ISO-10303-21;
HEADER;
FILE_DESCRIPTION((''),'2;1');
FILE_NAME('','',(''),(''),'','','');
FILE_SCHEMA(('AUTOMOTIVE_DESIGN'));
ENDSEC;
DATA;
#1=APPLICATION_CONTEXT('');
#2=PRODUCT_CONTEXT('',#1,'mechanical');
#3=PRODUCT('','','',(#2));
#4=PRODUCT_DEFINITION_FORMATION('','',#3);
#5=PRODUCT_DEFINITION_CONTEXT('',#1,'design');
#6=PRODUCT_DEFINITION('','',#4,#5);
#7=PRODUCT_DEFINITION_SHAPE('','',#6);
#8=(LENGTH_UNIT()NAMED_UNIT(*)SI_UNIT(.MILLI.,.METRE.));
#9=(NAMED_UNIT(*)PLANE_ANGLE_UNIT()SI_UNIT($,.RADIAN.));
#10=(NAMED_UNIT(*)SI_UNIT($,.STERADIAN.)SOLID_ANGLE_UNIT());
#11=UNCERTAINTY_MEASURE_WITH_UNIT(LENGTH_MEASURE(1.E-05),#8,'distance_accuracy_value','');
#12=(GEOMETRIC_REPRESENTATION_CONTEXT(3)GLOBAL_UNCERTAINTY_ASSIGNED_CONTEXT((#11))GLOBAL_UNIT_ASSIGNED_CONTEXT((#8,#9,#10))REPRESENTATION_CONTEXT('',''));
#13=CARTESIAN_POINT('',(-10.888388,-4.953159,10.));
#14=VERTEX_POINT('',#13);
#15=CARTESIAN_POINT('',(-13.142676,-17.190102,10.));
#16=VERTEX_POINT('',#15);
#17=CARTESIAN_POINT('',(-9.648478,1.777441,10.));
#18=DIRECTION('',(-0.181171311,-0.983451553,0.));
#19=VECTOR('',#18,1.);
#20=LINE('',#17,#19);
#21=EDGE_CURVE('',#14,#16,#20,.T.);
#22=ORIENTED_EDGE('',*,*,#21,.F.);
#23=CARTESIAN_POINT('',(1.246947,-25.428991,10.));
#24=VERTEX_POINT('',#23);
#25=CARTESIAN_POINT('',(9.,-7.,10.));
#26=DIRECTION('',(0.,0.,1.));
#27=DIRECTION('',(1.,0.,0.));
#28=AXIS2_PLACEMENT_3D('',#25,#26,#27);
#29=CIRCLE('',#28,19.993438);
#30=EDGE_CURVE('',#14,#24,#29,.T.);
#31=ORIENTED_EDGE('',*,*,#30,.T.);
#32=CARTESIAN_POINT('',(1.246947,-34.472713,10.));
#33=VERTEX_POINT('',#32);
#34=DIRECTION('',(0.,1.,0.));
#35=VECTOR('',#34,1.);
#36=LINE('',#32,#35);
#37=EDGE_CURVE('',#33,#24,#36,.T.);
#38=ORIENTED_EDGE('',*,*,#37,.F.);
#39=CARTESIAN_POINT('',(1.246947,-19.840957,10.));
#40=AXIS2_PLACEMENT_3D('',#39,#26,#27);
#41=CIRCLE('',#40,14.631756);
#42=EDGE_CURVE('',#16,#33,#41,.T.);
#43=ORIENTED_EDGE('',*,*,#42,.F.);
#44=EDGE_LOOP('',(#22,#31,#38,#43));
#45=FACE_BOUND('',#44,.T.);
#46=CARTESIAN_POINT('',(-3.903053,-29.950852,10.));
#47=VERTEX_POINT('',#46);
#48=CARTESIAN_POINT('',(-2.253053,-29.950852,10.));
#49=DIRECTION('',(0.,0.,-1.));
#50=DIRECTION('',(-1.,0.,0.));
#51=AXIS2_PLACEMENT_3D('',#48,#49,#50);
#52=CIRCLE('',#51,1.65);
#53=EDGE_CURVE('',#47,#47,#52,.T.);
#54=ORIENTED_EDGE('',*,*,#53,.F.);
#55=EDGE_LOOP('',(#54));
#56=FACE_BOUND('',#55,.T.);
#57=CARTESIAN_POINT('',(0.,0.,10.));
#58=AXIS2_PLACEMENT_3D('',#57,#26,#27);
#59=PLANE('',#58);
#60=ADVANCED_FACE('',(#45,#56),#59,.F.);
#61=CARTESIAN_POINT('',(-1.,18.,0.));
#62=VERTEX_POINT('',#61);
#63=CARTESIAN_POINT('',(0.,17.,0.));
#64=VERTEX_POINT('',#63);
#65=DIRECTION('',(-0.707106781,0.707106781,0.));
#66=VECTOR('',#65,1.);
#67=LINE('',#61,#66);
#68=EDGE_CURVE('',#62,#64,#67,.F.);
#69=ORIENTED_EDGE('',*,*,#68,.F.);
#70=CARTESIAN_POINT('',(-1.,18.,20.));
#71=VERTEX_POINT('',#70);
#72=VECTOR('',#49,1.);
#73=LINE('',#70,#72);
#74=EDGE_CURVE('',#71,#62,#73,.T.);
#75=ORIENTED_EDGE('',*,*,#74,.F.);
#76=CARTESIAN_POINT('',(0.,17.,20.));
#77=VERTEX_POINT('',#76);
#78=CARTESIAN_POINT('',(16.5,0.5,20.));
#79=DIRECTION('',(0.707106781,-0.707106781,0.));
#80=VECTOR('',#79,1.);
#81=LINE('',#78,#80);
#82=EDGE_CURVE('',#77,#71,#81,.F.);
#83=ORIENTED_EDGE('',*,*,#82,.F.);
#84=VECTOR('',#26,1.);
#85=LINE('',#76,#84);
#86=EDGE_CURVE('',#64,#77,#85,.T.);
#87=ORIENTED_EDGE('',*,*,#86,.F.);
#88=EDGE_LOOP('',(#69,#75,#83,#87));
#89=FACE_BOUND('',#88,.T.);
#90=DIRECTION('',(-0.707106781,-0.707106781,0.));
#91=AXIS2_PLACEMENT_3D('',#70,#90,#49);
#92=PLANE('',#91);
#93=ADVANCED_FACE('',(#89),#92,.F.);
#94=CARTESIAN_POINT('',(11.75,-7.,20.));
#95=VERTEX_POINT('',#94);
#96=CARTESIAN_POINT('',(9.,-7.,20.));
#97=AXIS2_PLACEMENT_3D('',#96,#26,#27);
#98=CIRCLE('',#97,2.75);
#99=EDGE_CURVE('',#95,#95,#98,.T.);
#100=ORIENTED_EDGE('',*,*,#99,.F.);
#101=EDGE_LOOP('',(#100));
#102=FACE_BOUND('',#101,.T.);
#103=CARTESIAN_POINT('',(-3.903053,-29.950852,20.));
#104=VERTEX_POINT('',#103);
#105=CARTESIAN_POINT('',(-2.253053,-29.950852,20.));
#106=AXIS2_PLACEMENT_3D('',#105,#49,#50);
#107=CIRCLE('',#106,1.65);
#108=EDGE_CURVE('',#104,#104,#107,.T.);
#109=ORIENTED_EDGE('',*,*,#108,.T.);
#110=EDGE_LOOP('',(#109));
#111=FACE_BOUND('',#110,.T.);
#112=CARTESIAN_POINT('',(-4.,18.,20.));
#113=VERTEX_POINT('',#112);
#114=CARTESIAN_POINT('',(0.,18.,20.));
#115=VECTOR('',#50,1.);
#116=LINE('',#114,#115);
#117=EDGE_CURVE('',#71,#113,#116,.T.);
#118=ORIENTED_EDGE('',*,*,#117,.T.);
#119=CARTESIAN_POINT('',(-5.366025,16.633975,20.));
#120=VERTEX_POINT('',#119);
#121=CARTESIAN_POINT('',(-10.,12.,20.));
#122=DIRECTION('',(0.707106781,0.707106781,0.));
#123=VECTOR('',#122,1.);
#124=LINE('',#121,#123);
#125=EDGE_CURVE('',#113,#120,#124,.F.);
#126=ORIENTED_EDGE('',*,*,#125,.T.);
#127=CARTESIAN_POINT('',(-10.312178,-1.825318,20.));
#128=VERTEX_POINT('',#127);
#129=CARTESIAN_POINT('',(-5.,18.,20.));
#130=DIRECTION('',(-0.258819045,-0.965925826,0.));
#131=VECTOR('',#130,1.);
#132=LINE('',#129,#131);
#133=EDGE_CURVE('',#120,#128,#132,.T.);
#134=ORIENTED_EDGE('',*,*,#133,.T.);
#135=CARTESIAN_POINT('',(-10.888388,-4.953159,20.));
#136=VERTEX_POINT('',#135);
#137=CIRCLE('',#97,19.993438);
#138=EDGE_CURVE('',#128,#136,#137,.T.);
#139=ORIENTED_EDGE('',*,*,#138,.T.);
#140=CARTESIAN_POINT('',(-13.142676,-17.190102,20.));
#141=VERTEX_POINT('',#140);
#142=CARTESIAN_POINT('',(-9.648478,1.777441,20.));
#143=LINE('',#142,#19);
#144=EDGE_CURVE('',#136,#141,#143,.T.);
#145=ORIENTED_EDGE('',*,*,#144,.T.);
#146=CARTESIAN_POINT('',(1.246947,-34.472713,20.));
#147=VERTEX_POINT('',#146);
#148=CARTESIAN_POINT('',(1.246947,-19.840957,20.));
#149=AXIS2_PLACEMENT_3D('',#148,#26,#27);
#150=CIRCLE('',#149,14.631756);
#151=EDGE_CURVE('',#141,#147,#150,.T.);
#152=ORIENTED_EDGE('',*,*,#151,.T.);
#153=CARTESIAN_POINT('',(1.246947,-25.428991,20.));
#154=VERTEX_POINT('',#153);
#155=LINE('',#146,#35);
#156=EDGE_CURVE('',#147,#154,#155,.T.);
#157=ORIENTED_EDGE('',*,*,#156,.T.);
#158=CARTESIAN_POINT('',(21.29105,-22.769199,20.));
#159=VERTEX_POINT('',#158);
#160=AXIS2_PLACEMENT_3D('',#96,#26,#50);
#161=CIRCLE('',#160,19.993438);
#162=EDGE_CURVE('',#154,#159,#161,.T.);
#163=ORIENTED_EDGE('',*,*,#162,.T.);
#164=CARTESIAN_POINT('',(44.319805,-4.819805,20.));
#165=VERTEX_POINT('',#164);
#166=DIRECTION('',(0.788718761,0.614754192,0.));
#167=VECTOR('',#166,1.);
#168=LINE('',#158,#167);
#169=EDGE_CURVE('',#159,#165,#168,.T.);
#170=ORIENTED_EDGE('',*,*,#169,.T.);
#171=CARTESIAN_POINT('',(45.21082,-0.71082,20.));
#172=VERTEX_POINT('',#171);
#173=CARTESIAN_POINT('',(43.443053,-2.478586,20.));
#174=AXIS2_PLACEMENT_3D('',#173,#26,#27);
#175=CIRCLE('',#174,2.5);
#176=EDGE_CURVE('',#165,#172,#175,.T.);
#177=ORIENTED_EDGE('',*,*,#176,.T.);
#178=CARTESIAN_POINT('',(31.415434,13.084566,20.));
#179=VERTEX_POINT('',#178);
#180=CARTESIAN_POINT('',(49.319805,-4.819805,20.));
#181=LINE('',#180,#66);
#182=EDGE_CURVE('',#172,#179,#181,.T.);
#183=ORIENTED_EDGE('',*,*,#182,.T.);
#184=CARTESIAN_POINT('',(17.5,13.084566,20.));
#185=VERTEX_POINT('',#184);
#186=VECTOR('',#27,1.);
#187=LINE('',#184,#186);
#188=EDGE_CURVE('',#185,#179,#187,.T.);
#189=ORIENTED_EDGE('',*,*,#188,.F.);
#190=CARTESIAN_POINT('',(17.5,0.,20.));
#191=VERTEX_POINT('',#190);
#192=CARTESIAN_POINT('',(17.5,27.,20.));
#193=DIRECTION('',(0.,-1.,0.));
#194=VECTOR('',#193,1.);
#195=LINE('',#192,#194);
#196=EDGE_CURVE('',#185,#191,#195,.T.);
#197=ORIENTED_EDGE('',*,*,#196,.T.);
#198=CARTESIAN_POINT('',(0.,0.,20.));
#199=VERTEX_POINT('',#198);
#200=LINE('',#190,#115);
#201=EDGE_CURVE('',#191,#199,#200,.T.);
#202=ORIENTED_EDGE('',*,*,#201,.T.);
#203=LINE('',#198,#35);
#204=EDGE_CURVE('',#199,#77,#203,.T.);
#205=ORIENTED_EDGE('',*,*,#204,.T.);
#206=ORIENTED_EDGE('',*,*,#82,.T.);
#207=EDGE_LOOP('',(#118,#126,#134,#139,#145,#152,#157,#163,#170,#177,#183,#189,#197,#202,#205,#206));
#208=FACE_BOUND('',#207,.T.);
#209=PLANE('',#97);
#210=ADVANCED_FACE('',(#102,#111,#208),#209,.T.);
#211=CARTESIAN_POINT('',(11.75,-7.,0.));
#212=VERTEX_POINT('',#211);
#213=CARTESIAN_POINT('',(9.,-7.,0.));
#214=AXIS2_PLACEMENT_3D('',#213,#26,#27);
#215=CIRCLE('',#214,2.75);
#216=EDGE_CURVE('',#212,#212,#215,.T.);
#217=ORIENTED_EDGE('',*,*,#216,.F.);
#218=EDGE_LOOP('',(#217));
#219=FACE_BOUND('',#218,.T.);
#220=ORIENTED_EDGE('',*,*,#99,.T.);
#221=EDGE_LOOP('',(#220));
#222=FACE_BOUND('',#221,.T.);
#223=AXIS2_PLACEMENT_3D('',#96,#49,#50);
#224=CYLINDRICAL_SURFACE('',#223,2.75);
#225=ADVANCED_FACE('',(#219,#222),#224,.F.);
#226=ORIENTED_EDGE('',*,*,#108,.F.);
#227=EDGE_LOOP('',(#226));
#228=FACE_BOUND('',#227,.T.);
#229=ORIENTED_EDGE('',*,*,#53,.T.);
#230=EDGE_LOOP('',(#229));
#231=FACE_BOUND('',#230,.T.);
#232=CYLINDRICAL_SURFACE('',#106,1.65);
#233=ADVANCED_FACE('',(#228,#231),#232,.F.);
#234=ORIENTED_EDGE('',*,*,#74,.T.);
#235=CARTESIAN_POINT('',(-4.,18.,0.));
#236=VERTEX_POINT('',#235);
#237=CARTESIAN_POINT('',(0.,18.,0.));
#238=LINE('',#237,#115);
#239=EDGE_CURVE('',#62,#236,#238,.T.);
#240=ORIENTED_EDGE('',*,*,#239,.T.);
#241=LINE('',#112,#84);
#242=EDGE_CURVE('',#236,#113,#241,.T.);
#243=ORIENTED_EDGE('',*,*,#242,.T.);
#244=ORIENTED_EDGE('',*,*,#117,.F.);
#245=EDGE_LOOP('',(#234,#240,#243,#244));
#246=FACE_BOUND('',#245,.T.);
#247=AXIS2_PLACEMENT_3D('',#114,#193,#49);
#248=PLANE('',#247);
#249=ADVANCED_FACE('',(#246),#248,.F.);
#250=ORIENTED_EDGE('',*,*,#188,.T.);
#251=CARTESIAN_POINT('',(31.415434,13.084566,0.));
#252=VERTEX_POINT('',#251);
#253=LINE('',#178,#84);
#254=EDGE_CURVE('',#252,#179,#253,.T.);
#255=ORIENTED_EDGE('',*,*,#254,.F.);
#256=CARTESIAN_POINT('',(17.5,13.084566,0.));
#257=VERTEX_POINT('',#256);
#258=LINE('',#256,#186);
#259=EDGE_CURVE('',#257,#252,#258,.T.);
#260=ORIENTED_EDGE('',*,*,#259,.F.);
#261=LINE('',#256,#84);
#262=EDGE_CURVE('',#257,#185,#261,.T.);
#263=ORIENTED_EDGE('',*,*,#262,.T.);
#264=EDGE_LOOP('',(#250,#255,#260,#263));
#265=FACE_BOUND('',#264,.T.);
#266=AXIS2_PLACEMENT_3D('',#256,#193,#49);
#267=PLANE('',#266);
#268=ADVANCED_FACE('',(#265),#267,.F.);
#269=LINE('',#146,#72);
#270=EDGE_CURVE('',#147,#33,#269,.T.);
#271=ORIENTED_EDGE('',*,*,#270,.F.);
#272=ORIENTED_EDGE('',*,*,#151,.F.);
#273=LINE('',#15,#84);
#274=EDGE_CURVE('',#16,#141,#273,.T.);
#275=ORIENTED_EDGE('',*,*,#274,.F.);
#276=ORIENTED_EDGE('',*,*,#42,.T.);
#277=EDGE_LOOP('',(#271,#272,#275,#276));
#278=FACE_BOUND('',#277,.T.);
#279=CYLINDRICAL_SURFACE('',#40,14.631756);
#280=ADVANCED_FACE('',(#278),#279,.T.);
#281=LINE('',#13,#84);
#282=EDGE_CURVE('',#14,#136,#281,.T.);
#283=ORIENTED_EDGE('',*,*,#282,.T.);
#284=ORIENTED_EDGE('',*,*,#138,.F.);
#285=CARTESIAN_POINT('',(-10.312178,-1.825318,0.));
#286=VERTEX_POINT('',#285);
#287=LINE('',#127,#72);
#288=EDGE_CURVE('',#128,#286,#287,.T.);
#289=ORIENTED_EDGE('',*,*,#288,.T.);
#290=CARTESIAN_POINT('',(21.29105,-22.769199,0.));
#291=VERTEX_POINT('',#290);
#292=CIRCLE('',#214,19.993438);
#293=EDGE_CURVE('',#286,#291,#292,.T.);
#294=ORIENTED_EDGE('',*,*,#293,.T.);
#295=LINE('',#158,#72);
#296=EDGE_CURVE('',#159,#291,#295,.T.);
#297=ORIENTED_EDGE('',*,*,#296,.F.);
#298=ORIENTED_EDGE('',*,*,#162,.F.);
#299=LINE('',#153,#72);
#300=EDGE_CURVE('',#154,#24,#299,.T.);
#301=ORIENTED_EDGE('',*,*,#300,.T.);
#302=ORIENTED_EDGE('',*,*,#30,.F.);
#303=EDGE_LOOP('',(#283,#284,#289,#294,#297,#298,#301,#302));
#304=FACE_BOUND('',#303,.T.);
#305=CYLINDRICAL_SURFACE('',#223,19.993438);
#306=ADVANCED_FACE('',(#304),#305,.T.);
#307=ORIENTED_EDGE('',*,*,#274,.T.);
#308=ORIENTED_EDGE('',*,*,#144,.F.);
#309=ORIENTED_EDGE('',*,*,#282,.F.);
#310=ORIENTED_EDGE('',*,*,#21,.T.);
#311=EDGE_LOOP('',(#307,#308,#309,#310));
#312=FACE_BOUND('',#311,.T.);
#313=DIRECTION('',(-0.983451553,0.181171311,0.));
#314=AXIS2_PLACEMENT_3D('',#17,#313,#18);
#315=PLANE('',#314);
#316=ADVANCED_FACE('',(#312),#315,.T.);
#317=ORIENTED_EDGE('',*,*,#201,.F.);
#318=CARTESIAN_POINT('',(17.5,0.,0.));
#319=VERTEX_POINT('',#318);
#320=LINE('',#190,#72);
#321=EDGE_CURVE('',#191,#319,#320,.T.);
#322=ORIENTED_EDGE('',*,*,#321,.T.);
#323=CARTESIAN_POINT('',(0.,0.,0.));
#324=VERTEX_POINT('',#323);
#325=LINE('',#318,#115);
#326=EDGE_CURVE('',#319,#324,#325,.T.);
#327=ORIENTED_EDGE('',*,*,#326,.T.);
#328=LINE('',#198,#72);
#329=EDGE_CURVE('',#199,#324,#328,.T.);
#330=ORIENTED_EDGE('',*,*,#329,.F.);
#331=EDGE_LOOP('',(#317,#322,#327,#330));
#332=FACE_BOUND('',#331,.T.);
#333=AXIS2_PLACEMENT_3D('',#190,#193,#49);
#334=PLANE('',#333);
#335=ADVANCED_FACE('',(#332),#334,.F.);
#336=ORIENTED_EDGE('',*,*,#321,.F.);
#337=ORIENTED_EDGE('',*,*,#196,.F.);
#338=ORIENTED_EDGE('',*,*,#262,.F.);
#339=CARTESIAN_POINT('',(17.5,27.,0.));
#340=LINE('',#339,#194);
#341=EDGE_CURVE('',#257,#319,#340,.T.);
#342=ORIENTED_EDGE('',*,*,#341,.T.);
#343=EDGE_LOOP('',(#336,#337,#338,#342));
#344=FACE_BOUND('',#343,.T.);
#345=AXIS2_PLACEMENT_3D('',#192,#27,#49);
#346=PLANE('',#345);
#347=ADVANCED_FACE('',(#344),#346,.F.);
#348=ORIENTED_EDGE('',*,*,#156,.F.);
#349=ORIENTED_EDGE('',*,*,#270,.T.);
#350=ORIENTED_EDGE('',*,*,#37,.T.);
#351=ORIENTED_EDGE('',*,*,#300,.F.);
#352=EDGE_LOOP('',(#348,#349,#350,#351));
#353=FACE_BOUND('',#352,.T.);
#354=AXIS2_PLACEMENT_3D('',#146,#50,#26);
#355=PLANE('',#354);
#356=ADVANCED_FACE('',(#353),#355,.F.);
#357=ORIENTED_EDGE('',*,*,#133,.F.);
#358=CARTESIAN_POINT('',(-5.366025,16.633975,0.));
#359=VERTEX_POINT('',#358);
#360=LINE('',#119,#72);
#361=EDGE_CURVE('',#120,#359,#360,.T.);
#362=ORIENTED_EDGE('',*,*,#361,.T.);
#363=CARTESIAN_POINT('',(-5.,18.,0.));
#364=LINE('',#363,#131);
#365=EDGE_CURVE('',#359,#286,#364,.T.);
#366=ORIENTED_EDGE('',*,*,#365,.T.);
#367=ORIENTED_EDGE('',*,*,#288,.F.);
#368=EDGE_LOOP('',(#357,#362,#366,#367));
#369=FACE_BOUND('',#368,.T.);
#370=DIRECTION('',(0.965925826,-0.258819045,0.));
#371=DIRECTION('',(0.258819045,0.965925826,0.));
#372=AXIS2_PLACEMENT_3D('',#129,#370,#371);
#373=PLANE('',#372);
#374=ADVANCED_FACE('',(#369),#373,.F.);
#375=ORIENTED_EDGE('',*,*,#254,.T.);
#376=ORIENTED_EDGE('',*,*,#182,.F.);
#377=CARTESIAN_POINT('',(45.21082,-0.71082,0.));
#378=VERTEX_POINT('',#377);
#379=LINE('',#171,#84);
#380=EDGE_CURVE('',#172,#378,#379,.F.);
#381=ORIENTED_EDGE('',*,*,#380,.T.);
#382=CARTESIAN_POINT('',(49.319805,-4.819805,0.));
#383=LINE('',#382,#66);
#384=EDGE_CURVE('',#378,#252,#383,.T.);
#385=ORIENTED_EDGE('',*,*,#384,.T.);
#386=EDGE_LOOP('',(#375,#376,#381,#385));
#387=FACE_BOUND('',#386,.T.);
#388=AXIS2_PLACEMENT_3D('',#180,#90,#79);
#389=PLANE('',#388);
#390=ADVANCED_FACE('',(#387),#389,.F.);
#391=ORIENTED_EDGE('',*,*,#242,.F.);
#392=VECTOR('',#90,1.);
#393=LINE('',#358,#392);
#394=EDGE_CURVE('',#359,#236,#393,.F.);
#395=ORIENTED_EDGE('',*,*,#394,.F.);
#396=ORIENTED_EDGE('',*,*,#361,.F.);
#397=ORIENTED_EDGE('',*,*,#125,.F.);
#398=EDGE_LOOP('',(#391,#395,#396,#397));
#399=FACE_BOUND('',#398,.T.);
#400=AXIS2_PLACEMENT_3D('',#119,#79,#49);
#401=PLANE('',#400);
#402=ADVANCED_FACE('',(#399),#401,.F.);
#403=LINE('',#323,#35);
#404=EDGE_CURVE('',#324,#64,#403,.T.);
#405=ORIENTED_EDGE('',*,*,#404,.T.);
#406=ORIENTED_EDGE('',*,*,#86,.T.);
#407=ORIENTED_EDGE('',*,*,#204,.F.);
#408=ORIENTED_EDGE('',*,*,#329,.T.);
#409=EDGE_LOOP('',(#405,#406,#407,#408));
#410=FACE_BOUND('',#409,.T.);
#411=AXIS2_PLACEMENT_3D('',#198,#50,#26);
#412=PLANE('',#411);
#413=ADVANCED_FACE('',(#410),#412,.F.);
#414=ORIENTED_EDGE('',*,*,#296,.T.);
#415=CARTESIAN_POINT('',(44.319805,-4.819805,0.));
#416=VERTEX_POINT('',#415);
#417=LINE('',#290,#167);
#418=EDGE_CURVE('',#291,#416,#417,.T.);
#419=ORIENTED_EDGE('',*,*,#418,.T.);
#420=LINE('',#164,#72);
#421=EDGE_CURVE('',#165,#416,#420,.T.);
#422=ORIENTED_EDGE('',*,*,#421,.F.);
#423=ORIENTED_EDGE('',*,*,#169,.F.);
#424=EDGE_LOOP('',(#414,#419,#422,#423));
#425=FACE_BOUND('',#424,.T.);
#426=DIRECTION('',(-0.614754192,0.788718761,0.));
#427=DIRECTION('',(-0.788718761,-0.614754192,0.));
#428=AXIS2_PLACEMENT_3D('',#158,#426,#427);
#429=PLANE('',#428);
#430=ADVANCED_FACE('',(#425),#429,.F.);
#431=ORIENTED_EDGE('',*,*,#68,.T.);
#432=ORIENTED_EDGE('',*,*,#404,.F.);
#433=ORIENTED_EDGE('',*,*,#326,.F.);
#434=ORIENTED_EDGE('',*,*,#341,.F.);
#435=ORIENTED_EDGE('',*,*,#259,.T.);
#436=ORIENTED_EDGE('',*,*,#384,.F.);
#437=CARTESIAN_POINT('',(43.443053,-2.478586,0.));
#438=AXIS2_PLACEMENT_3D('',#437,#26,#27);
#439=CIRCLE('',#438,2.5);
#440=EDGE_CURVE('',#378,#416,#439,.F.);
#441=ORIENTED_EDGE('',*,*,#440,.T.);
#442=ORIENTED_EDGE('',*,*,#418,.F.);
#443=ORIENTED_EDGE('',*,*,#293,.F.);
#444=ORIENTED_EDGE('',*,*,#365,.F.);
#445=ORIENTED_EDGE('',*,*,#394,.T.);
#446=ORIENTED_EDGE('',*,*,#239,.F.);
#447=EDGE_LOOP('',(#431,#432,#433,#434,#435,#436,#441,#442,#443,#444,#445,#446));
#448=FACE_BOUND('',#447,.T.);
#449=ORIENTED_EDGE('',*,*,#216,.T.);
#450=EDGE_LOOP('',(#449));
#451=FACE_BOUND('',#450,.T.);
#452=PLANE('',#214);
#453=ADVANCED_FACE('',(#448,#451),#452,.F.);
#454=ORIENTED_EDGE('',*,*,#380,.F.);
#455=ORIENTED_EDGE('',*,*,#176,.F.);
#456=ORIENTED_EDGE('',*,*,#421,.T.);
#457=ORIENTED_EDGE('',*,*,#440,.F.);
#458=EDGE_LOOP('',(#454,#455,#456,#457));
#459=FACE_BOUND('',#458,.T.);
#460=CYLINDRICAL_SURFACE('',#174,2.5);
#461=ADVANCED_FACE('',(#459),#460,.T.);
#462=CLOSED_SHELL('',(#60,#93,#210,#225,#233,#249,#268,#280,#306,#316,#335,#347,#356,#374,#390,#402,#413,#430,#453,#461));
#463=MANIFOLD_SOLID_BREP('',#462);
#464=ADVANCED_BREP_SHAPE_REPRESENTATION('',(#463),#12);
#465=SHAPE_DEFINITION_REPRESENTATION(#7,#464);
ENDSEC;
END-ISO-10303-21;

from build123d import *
from OCP.BRepFilletAPI import BRepFilletAPI_MakeChamfer

# Parameters (mm, degrees)
SKETCH_1_R          = 2.75
EXTRUDE_1_DEPTH     = 20
CHAMFER_1_SIZE      = 1
CHAMFER_1_SIZE2     = 1.414213562
FILLET_1_R          = 2.5
SKETCH_2_W          = 28.23976686
SKETCH_2_H          = 12.215936495
CUT_EXTRUDE_1_DEPTH = 57.915812899
EXTRUDE_START       = -10
EXTRUDE_2_DEPTH     = 10
SKETCH_4_R          = 1.65
CUT_EXTRUDE_2_DEPTH = 10


with BuildPart() as part:
    # 草图1 → 凸台-拉伸1 (new body)
    with BuildSketch(Plane.XY):
        with BuildLine():
            Line((0, 0), (0, 18))
            Line((0, 18), (-5, 18))
            Line((-5, 18), (-10.312177826, -1.825317547))
            ThreePointArc((-10.312177826, -1.825317547), (-2.044709461, -23.66589163), (21.291049633, -22.769199403))
            Line((21.291049633, -22.769199403), (44.319805153, -4.819805153))
            Line((44.319805153, -4.819805153), (49.319805153, -4.819805153))
            Line((49.319805153, -4.819805153), (17.5, 27))
            Line((17.5, 27), (17.5, 0))
            Line((17.5, 0), (0, 0))
        make_face()
        with Locations((9, -7)):
            Circle(SKETCH_1_R, mode=Mode.SUBTRACT)
    extrude(amount=EXTRUDE_1_DEPTH)

    # 倒角1: one chamfer whose edges measure the first distance from different faces: ONE call of the kernel's chamfer builder (chamfer() names one face for all edges)
    chamfer_1_edges_1 = [part.edges().sort_by_distance(p)[0] for p in [
        (-5, 18, 10),
    ]]
    chamfer_1_side_1 = [part.faces().sort_by_distance(p)[0] for p in [
        (-2.5, 18, 10),
    ]]
    chamfer_1_edges_2 = [part.edges().sort_by_distance(p)[0] for p in [
        (0, 18, 10),
    ]]
    chamfer_1 = BRepFilletAPI_MakeChamfer(part.part.solid().wrapped)
    for e in chamfer_1_edges_1:
        chamfer_1.Add(CHAMFER_1_SIZE, CHAMFER_1_SIZE2, e.wrapped, chamfer_1_side_1[0].wrapped)  # the first distance lies on this face
    for e in chamfer_1_edges_2:
        chamfer_1.Add(CHAMFER_1_SIZE, e.wrapped)
    add(Compound.cast(chamfer_1.Shape()), mode=Mode.REPLACE)

    # 圆角1
    # the kernel refuses this fillet: 2.5 mm, written as the material it takes off along each edge
    with BuildSketch(Plane(origin=(17.5, 27, -15.088834765), x_dir=(0, -1, 0), z_dir=(0, 0, 1))) as fillet_1_piece_1:
        with BuildLine():
            CenterArc((FILLET_1_R * 2.41421356237, FILLET_1_R), FILLET_1_R, 135, 135)
            Line((FILLET_1_R * 1.70710678119, FILLET_1_R * 1.70710678119), (FILLET_1_R * 1.69296464556, FILLET_1_R * 1.72124891681))
            Line((FILLET_1_R * 1.69296464556, FILLET_1_R * 1.72124891681), (-FILLET_1_R * 0.0141421356237, FILLET_1_R * 0.0141421356237))
            Line((-FILLET_1_R * 0.0141421356237, FILLET_1_R * 0.0141421356237), (0, -FILLET_1_R * 0.02))
            Line((0, -FILLET_1_R * 0.02), (FILLET_1_R * 2.41421356237, -FILLET_1_R * 0.02))
            Line((FILLET_1_R * 2.41421356237, -FILLET_1_R * 0.02), (FILLET_1_R * 2.41421356237, 0))
        make_face()
    extrude(amount=50.17766953, mode=Mode.SUBTRACT)
    with BuildSketch(Plane(origin=(49.319805153, -4.819805153, -14.527458022), x_dir=(-0.7071067811865513, 0.7071067811865437, 0), z_dir=(0, 0, 1))) as fillet_1_piece_2:
        with BuildLine():
            CenterArc((5.810983209, 2.5), FILLET_1_R, 155.530199479, 114.469800521)
            Line((3.535533906, 3.535533906), (3.49002492, 3.556244584))
            ThreePointArc((3.49002492, 3.556244584), (1.732411614, 1.803122292), (-0.035355339, 0.035355339))
            Line((-0.035355339, 0.035355339), (0, -0.05))
            Line((0, -0.05), (5.810983209, -0.05))
            Line((5.810983209, -0.05), (5.810983209, 0))
        make_face()
    extrude(amount=49.054916044, mode=Mode.SUBTRACT)

    # 草图2 → 切除-拉伸1 (cut, through all)
    with BuildSketch(Plane.XY.offset(20)):
        with Locations((31.61988343, 19.192534099)):
            Rectangle(SKETCH_2_W, SKETCH_2_H)
    extrude(amount=-CUT_EXTRUDE_1_DEPTH, mode=Mode.SUBTRACT)

    # 草图3 → 凸台-拉伸2 (add)
    with BuildSketch(Plane.XY.offset(20).offset(EXTRUDE_START)):
        with BuildLine():
            ThreePointArc((21.291049633, -22.769199403), (-0.684147296, -24.491564883), (-10.888388441, -4.953159484))
            Line((-10.888388441, -4.953159484), (-13.142676364, -17.190102226))
            ThreePointArc((-13.142676364, -17.190102226), (-6.344046, -32.349558271), (10.241880352, -31.381297238))
            Line((10.241880352, -31.381297238), (21.291049633, -22.769199403))
        make_face()
    extrude(amount=EXTRUDE_2_DEPTH)

    # 草图4 → 切除-拉伸2 (cut)
    with BuildSketch(Plane(origin=(0, 0, 10), x_dir=(-1, 0, 0), z_dir=(0, 0, -1))):
        with Locations((2.25305307, -29.950852035)):
            Circle(SKETCH_4_R)
        with BuildLine():
            Line((-1.24694693, -34.472712807), (-1.24694693, -25.428991263))
            ThreePointArc((-1.24694693, -25.428991263), (-11.630014522, -26.819701675), (-21.291049633, -22.769199403))
            Line((-21.291049633, -22.769199403), (-10.241880352, -31.381297238))
            ThreePointArc((-10.241880352, -31.381297238), (-6.002619266, -33.678292696), (-1.24694693, -34.472712807))
        make_face()
    extrude(amount=-CUT_EXTRUDE_2_DEPTH, mode=Mode.SUBTRACT)


solid = part.part
